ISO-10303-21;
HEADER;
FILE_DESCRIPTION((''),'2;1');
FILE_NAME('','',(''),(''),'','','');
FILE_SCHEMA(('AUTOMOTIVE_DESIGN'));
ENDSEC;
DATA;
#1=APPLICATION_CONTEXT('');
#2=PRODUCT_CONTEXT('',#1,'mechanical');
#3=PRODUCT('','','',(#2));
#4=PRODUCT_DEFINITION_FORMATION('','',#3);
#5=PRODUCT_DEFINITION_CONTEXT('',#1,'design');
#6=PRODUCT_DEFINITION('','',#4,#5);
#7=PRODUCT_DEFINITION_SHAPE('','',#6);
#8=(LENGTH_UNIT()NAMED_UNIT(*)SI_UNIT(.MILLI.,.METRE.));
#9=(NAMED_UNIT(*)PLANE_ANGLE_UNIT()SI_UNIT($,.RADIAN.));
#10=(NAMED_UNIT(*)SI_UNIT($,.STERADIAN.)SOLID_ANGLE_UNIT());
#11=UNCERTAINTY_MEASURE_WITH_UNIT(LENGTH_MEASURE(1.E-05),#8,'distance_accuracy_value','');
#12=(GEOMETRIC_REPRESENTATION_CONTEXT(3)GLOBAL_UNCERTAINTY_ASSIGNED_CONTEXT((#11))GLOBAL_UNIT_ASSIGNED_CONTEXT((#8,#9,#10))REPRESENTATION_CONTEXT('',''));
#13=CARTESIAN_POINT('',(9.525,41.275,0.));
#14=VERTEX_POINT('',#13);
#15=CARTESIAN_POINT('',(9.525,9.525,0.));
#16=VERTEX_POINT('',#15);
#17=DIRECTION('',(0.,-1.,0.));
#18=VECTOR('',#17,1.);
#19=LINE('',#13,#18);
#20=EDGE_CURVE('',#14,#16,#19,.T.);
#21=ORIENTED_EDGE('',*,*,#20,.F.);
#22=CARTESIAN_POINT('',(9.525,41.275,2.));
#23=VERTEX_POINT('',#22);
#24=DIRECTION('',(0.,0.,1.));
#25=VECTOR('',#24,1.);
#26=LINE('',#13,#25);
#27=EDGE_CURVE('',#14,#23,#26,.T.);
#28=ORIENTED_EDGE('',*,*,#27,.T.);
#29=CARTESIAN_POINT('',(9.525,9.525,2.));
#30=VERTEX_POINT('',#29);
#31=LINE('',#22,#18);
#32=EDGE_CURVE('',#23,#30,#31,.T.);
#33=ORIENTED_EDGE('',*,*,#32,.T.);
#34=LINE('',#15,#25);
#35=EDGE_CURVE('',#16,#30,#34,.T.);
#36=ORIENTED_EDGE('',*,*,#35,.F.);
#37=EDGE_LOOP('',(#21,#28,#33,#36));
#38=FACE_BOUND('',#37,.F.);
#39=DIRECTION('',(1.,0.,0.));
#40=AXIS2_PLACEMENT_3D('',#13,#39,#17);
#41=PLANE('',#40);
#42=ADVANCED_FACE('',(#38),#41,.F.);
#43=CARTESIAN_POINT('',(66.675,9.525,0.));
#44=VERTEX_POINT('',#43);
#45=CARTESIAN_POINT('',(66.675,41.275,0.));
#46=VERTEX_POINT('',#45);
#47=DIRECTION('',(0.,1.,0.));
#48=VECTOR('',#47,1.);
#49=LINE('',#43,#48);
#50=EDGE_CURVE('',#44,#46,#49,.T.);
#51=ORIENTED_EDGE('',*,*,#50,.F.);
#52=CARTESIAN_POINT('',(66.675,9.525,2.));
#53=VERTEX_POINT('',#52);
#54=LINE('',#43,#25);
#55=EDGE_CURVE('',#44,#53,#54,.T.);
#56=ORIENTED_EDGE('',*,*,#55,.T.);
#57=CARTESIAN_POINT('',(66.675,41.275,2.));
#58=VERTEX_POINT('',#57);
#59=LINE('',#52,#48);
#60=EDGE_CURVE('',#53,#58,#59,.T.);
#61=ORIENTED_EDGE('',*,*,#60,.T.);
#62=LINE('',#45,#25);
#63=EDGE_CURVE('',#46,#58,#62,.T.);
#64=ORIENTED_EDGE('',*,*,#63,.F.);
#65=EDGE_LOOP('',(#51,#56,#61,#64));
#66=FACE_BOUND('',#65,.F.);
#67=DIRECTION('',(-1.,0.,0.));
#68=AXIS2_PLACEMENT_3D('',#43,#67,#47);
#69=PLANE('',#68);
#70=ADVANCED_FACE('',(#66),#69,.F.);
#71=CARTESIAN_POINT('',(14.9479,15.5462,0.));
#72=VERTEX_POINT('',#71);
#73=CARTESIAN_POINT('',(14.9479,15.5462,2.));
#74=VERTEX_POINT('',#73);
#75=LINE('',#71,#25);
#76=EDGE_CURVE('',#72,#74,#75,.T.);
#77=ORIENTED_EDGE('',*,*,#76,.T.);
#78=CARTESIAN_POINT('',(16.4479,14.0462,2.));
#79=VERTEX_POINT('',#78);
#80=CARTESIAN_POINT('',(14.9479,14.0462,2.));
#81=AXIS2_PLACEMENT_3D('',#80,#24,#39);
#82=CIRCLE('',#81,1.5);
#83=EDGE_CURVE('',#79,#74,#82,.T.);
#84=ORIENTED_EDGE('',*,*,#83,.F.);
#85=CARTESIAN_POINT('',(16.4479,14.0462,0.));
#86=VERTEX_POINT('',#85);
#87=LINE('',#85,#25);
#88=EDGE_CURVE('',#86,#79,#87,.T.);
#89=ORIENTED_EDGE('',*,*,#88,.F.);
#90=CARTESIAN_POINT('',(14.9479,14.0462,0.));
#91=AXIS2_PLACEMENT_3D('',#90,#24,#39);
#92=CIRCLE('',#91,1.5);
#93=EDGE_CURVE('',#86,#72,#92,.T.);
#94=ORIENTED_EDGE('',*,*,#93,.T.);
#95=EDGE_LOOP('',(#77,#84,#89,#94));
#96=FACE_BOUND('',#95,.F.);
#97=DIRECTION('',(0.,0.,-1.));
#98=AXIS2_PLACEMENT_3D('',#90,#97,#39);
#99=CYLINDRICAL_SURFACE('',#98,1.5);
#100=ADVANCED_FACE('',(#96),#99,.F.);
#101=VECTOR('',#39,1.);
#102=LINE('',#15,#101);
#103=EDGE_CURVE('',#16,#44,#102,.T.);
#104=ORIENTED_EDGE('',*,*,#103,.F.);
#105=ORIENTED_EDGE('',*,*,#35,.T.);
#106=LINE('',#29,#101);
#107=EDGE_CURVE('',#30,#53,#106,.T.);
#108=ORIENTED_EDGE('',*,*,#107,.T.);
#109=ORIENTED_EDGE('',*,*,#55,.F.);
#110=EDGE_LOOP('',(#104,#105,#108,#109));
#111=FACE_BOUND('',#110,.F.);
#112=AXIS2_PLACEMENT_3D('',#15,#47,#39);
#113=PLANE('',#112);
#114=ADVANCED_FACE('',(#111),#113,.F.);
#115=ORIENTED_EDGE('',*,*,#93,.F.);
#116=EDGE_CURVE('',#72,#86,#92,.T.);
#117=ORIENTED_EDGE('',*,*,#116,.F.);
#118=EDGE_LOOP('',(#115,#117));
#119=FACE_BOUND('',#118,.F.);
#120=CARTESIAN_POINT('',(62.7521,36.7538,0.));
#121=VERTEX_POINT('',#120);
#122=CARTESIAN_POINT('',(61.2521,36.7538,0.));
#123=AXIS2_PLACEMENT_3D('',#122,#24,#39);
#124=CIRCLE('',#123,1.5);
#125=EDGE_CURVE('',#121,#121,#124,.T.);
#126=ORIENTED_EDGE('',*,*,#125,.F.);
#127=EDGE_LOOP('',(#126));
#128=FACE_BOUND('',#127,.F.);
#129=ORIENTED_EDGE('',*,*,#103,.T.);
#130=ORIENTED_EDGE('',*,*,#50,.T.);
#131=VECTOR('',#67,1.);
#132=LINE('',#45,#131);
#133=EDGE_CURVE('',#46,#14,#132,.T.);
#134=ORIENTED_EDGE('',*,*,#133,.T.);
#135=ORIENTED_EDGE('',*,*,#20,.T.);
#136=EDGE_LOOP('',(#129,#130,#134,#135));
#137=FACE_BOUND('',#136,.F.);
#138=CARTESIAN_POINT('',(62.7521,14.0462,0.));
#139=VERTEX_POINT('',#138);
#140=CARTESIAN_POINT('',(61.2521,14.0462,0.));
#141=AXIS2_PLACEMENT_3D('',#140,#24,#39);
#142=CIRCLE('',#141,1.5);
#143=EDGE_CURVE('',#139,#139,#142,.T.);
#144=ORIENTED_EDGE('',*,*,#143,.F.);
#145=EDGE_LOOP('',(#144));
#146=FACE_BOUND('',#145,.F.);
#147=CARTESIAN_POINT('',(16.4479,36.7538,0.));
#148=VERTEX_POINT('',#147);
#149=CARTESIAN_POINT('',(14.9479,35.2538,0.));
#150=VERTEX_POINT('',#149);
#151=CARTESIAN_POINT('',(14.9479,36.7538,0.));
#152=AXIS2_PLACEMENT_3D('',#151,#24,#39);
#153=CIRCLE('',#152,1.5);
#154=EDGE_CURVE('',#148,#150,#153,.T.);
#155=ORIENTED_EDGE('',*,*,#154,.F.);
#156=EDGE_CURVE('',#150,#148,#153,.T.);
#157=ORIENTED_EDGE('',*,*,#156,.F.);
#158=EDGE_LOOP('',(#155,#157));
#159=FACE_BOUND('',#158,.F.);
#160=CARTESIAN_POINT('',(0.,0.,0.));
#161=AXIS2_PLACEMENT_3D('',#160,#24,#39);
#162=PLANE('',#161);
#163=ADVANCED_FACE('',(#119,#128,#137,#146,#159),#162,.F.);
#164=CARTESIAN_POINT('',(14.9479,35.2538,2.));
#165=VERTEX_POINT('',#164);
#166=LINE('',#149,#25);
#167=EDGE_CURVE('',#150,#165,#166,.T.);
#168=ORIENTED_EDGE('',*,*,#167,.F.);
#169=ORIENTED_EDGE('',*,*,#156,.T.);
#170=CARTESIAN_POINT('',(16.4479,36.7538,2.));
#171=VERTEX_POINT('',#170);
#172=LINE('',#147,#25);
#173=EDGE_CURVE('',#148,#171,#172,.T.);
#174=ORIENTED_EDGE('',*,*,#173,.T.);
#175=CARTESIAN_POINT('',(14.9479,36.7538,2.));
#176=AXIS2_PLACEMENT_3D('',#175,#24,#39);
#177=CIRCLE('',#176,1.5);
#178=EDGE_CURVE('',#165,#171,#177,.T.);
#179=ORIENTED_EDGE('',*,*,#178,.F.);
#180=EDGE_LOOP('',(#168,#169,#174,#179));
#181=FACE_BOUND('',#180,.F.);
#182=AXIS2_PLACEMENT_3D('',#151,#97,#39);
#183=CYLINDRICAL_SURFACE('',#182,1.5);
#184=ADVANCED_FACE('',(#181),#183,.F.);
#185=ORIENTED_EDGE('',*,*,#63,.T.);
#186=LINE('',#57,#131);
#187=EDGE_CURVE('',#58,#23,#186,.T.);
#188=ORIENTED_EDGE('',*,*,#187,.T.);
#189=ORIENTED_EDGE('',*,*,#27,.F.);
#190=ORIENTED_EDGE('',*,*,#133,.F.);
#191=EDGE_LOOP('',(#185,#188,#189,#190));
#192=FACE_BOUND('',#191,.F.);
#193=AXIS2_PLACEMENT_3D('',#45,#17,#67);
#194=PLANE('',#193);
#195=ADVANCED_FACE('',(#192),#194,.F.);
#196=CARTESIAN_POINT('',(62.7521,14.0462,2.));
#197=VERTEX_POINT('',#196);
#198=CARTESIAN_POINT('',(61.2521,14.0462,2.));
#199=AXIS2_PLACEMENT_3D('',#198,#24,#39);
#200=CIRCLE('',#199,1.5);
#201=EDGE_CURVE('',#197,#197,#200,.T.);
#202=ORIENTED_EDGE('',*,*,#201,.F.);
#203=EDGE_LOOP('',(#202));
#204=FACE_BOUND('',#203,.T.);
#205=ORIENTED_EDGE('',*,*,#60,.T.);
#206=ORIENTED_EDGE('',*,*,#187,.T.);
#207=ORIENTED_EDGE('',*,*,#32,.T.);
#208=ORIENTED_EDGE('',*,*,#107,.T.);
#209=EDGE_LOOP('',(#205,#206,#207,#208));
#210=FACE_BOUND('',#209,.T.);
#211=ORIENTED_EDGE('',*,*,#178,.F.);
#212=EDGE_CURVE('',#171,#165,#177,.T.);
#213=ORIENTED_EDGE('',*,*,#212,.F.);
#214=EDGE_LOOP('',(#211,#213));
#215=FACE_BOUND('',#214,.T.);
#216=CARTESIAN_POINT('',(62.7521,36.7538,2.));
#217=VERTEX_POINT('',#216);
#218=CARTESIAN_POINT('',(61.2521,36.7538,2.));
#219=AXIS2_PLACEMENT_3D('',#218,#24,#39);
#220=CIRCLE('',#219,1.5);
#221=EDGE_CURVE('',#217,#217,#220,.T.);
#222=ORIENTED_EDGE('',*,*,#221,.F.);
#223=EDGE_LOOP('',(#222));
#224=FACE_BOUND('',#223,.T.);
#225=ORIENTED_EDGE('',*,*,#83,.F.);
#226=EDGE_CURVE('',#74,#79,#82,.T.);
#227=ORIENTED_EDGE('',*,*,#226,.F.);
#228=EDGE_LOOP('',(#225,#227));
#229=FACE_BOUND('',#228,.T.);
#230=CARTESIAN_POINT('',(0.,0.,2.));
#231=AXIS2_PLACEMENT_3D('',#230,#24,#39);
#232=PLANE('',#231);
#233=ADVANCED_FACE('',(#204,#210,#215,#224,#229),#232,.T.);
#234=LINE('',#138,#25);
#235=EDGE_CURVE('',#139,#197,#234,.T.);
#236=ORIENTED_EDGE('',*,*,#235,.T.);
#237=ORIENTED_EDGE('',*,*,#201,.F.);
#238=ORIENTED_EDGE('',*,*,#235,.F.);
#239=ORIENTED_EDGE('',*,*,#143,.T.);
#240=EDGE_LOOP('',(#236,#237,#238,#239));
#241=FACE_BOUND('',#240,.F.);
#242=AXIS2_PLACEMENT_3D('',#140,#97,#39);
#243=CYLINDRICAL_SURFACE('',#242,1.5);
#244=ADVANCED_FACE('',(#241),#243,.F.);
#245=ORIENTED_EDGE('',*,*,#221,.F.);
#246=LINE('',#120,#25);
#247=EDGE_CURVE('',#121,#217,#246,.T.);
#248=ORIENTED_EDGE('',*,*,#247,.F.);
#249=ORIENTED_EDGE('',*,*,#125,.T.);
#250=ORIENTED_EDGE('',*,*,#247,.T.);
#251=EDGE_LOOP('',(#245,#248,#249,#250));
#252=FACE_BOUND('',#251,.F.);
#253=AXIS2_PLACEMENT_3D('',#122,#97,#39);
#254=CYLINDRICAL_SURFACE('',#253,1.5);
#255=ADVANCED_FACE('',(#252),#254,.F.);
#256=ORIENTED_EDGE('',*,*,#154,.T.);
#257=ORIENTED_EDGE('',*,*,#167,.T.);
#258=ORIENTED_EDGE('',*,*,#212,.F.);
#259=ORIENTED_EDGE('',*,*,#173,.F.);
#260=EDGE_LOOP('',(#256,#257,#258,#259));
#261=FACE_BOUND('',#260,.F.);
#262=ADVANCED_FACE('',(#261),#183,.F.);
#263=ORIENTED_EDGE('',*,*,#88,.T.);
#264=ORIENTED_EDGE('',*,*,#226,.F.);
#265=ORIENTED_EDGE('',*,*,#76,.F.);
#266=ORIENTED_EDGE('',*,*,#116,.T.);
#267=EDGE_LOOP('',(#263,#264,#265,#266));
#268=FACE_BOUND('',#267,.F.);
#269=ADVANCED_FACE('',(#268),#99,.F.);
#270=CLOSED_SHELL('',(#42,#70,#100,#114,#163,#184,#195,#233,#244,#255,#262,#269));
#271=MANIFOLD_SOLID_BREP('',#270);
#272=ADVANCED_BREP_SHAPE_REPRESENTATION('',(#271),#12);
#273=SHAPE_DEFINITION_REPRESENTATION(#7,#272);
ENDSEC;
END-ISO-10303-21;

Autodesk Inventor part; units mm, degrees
ref_plane "YZ Plane" through (0, 0, 0) normal (1, 0, 0) x (0, 1, 0)
ref_plane "XZ Plane" through (0, 0, 0) normal (0, 1, 0) x (-1, 0, 0)
ref_plane "XY Plane" through (0, 0, 0) normal (0, 0, 1) x (1, 0, 0)
sketch "Sketch1" plane through (0, 0, 0) normal (0, 0, 1) x (1, 0, 0)
  line L0 (0, 0) -> (0, 50.8)
  line L1 (0, 50.8) -> (76.2, 50.8)
  line L2 (76.2, 50.8) -> (76.2, 0)
  line L3 (76.2, 0) -> (0, 0)
  circle A0 centre (61.2521, 14.0462) radius 1.5
  circle A1 centre (14.9479, 14.0462) radius 1.5
  circle A2 centre (61.2521, 36.7538) radius 1.5
  circle A3 centre (14.9479, 36.7538) radius 1.5
  line L4 (14.9479, 36.7538) -> (14.9479, 14.0462)
  line L5 (0, 25.4) -> (-9.2458, 25.4)
  line L6 (66.675, 41.275) -> (9.525, 41.275)
  line L7 (9.525, 41.275) -> (9.525, 9.525)
  line L8 (9.525, 9.525) -> (66.675, 9.525)
  line L9 (66.675, 9.525) -> (66.675, 41.275)
  dimension "d0" = 50.8
  dimension "d1" = 76.2
  dimension "d2" = 3
  dimension "d3" = 3
  dimension "d4" = 9.525
extrude "Extrusion1" add sketch "Sketch1" along normal blind 2 contours L9 L8 L7 L6
properties part number "baseplate"
